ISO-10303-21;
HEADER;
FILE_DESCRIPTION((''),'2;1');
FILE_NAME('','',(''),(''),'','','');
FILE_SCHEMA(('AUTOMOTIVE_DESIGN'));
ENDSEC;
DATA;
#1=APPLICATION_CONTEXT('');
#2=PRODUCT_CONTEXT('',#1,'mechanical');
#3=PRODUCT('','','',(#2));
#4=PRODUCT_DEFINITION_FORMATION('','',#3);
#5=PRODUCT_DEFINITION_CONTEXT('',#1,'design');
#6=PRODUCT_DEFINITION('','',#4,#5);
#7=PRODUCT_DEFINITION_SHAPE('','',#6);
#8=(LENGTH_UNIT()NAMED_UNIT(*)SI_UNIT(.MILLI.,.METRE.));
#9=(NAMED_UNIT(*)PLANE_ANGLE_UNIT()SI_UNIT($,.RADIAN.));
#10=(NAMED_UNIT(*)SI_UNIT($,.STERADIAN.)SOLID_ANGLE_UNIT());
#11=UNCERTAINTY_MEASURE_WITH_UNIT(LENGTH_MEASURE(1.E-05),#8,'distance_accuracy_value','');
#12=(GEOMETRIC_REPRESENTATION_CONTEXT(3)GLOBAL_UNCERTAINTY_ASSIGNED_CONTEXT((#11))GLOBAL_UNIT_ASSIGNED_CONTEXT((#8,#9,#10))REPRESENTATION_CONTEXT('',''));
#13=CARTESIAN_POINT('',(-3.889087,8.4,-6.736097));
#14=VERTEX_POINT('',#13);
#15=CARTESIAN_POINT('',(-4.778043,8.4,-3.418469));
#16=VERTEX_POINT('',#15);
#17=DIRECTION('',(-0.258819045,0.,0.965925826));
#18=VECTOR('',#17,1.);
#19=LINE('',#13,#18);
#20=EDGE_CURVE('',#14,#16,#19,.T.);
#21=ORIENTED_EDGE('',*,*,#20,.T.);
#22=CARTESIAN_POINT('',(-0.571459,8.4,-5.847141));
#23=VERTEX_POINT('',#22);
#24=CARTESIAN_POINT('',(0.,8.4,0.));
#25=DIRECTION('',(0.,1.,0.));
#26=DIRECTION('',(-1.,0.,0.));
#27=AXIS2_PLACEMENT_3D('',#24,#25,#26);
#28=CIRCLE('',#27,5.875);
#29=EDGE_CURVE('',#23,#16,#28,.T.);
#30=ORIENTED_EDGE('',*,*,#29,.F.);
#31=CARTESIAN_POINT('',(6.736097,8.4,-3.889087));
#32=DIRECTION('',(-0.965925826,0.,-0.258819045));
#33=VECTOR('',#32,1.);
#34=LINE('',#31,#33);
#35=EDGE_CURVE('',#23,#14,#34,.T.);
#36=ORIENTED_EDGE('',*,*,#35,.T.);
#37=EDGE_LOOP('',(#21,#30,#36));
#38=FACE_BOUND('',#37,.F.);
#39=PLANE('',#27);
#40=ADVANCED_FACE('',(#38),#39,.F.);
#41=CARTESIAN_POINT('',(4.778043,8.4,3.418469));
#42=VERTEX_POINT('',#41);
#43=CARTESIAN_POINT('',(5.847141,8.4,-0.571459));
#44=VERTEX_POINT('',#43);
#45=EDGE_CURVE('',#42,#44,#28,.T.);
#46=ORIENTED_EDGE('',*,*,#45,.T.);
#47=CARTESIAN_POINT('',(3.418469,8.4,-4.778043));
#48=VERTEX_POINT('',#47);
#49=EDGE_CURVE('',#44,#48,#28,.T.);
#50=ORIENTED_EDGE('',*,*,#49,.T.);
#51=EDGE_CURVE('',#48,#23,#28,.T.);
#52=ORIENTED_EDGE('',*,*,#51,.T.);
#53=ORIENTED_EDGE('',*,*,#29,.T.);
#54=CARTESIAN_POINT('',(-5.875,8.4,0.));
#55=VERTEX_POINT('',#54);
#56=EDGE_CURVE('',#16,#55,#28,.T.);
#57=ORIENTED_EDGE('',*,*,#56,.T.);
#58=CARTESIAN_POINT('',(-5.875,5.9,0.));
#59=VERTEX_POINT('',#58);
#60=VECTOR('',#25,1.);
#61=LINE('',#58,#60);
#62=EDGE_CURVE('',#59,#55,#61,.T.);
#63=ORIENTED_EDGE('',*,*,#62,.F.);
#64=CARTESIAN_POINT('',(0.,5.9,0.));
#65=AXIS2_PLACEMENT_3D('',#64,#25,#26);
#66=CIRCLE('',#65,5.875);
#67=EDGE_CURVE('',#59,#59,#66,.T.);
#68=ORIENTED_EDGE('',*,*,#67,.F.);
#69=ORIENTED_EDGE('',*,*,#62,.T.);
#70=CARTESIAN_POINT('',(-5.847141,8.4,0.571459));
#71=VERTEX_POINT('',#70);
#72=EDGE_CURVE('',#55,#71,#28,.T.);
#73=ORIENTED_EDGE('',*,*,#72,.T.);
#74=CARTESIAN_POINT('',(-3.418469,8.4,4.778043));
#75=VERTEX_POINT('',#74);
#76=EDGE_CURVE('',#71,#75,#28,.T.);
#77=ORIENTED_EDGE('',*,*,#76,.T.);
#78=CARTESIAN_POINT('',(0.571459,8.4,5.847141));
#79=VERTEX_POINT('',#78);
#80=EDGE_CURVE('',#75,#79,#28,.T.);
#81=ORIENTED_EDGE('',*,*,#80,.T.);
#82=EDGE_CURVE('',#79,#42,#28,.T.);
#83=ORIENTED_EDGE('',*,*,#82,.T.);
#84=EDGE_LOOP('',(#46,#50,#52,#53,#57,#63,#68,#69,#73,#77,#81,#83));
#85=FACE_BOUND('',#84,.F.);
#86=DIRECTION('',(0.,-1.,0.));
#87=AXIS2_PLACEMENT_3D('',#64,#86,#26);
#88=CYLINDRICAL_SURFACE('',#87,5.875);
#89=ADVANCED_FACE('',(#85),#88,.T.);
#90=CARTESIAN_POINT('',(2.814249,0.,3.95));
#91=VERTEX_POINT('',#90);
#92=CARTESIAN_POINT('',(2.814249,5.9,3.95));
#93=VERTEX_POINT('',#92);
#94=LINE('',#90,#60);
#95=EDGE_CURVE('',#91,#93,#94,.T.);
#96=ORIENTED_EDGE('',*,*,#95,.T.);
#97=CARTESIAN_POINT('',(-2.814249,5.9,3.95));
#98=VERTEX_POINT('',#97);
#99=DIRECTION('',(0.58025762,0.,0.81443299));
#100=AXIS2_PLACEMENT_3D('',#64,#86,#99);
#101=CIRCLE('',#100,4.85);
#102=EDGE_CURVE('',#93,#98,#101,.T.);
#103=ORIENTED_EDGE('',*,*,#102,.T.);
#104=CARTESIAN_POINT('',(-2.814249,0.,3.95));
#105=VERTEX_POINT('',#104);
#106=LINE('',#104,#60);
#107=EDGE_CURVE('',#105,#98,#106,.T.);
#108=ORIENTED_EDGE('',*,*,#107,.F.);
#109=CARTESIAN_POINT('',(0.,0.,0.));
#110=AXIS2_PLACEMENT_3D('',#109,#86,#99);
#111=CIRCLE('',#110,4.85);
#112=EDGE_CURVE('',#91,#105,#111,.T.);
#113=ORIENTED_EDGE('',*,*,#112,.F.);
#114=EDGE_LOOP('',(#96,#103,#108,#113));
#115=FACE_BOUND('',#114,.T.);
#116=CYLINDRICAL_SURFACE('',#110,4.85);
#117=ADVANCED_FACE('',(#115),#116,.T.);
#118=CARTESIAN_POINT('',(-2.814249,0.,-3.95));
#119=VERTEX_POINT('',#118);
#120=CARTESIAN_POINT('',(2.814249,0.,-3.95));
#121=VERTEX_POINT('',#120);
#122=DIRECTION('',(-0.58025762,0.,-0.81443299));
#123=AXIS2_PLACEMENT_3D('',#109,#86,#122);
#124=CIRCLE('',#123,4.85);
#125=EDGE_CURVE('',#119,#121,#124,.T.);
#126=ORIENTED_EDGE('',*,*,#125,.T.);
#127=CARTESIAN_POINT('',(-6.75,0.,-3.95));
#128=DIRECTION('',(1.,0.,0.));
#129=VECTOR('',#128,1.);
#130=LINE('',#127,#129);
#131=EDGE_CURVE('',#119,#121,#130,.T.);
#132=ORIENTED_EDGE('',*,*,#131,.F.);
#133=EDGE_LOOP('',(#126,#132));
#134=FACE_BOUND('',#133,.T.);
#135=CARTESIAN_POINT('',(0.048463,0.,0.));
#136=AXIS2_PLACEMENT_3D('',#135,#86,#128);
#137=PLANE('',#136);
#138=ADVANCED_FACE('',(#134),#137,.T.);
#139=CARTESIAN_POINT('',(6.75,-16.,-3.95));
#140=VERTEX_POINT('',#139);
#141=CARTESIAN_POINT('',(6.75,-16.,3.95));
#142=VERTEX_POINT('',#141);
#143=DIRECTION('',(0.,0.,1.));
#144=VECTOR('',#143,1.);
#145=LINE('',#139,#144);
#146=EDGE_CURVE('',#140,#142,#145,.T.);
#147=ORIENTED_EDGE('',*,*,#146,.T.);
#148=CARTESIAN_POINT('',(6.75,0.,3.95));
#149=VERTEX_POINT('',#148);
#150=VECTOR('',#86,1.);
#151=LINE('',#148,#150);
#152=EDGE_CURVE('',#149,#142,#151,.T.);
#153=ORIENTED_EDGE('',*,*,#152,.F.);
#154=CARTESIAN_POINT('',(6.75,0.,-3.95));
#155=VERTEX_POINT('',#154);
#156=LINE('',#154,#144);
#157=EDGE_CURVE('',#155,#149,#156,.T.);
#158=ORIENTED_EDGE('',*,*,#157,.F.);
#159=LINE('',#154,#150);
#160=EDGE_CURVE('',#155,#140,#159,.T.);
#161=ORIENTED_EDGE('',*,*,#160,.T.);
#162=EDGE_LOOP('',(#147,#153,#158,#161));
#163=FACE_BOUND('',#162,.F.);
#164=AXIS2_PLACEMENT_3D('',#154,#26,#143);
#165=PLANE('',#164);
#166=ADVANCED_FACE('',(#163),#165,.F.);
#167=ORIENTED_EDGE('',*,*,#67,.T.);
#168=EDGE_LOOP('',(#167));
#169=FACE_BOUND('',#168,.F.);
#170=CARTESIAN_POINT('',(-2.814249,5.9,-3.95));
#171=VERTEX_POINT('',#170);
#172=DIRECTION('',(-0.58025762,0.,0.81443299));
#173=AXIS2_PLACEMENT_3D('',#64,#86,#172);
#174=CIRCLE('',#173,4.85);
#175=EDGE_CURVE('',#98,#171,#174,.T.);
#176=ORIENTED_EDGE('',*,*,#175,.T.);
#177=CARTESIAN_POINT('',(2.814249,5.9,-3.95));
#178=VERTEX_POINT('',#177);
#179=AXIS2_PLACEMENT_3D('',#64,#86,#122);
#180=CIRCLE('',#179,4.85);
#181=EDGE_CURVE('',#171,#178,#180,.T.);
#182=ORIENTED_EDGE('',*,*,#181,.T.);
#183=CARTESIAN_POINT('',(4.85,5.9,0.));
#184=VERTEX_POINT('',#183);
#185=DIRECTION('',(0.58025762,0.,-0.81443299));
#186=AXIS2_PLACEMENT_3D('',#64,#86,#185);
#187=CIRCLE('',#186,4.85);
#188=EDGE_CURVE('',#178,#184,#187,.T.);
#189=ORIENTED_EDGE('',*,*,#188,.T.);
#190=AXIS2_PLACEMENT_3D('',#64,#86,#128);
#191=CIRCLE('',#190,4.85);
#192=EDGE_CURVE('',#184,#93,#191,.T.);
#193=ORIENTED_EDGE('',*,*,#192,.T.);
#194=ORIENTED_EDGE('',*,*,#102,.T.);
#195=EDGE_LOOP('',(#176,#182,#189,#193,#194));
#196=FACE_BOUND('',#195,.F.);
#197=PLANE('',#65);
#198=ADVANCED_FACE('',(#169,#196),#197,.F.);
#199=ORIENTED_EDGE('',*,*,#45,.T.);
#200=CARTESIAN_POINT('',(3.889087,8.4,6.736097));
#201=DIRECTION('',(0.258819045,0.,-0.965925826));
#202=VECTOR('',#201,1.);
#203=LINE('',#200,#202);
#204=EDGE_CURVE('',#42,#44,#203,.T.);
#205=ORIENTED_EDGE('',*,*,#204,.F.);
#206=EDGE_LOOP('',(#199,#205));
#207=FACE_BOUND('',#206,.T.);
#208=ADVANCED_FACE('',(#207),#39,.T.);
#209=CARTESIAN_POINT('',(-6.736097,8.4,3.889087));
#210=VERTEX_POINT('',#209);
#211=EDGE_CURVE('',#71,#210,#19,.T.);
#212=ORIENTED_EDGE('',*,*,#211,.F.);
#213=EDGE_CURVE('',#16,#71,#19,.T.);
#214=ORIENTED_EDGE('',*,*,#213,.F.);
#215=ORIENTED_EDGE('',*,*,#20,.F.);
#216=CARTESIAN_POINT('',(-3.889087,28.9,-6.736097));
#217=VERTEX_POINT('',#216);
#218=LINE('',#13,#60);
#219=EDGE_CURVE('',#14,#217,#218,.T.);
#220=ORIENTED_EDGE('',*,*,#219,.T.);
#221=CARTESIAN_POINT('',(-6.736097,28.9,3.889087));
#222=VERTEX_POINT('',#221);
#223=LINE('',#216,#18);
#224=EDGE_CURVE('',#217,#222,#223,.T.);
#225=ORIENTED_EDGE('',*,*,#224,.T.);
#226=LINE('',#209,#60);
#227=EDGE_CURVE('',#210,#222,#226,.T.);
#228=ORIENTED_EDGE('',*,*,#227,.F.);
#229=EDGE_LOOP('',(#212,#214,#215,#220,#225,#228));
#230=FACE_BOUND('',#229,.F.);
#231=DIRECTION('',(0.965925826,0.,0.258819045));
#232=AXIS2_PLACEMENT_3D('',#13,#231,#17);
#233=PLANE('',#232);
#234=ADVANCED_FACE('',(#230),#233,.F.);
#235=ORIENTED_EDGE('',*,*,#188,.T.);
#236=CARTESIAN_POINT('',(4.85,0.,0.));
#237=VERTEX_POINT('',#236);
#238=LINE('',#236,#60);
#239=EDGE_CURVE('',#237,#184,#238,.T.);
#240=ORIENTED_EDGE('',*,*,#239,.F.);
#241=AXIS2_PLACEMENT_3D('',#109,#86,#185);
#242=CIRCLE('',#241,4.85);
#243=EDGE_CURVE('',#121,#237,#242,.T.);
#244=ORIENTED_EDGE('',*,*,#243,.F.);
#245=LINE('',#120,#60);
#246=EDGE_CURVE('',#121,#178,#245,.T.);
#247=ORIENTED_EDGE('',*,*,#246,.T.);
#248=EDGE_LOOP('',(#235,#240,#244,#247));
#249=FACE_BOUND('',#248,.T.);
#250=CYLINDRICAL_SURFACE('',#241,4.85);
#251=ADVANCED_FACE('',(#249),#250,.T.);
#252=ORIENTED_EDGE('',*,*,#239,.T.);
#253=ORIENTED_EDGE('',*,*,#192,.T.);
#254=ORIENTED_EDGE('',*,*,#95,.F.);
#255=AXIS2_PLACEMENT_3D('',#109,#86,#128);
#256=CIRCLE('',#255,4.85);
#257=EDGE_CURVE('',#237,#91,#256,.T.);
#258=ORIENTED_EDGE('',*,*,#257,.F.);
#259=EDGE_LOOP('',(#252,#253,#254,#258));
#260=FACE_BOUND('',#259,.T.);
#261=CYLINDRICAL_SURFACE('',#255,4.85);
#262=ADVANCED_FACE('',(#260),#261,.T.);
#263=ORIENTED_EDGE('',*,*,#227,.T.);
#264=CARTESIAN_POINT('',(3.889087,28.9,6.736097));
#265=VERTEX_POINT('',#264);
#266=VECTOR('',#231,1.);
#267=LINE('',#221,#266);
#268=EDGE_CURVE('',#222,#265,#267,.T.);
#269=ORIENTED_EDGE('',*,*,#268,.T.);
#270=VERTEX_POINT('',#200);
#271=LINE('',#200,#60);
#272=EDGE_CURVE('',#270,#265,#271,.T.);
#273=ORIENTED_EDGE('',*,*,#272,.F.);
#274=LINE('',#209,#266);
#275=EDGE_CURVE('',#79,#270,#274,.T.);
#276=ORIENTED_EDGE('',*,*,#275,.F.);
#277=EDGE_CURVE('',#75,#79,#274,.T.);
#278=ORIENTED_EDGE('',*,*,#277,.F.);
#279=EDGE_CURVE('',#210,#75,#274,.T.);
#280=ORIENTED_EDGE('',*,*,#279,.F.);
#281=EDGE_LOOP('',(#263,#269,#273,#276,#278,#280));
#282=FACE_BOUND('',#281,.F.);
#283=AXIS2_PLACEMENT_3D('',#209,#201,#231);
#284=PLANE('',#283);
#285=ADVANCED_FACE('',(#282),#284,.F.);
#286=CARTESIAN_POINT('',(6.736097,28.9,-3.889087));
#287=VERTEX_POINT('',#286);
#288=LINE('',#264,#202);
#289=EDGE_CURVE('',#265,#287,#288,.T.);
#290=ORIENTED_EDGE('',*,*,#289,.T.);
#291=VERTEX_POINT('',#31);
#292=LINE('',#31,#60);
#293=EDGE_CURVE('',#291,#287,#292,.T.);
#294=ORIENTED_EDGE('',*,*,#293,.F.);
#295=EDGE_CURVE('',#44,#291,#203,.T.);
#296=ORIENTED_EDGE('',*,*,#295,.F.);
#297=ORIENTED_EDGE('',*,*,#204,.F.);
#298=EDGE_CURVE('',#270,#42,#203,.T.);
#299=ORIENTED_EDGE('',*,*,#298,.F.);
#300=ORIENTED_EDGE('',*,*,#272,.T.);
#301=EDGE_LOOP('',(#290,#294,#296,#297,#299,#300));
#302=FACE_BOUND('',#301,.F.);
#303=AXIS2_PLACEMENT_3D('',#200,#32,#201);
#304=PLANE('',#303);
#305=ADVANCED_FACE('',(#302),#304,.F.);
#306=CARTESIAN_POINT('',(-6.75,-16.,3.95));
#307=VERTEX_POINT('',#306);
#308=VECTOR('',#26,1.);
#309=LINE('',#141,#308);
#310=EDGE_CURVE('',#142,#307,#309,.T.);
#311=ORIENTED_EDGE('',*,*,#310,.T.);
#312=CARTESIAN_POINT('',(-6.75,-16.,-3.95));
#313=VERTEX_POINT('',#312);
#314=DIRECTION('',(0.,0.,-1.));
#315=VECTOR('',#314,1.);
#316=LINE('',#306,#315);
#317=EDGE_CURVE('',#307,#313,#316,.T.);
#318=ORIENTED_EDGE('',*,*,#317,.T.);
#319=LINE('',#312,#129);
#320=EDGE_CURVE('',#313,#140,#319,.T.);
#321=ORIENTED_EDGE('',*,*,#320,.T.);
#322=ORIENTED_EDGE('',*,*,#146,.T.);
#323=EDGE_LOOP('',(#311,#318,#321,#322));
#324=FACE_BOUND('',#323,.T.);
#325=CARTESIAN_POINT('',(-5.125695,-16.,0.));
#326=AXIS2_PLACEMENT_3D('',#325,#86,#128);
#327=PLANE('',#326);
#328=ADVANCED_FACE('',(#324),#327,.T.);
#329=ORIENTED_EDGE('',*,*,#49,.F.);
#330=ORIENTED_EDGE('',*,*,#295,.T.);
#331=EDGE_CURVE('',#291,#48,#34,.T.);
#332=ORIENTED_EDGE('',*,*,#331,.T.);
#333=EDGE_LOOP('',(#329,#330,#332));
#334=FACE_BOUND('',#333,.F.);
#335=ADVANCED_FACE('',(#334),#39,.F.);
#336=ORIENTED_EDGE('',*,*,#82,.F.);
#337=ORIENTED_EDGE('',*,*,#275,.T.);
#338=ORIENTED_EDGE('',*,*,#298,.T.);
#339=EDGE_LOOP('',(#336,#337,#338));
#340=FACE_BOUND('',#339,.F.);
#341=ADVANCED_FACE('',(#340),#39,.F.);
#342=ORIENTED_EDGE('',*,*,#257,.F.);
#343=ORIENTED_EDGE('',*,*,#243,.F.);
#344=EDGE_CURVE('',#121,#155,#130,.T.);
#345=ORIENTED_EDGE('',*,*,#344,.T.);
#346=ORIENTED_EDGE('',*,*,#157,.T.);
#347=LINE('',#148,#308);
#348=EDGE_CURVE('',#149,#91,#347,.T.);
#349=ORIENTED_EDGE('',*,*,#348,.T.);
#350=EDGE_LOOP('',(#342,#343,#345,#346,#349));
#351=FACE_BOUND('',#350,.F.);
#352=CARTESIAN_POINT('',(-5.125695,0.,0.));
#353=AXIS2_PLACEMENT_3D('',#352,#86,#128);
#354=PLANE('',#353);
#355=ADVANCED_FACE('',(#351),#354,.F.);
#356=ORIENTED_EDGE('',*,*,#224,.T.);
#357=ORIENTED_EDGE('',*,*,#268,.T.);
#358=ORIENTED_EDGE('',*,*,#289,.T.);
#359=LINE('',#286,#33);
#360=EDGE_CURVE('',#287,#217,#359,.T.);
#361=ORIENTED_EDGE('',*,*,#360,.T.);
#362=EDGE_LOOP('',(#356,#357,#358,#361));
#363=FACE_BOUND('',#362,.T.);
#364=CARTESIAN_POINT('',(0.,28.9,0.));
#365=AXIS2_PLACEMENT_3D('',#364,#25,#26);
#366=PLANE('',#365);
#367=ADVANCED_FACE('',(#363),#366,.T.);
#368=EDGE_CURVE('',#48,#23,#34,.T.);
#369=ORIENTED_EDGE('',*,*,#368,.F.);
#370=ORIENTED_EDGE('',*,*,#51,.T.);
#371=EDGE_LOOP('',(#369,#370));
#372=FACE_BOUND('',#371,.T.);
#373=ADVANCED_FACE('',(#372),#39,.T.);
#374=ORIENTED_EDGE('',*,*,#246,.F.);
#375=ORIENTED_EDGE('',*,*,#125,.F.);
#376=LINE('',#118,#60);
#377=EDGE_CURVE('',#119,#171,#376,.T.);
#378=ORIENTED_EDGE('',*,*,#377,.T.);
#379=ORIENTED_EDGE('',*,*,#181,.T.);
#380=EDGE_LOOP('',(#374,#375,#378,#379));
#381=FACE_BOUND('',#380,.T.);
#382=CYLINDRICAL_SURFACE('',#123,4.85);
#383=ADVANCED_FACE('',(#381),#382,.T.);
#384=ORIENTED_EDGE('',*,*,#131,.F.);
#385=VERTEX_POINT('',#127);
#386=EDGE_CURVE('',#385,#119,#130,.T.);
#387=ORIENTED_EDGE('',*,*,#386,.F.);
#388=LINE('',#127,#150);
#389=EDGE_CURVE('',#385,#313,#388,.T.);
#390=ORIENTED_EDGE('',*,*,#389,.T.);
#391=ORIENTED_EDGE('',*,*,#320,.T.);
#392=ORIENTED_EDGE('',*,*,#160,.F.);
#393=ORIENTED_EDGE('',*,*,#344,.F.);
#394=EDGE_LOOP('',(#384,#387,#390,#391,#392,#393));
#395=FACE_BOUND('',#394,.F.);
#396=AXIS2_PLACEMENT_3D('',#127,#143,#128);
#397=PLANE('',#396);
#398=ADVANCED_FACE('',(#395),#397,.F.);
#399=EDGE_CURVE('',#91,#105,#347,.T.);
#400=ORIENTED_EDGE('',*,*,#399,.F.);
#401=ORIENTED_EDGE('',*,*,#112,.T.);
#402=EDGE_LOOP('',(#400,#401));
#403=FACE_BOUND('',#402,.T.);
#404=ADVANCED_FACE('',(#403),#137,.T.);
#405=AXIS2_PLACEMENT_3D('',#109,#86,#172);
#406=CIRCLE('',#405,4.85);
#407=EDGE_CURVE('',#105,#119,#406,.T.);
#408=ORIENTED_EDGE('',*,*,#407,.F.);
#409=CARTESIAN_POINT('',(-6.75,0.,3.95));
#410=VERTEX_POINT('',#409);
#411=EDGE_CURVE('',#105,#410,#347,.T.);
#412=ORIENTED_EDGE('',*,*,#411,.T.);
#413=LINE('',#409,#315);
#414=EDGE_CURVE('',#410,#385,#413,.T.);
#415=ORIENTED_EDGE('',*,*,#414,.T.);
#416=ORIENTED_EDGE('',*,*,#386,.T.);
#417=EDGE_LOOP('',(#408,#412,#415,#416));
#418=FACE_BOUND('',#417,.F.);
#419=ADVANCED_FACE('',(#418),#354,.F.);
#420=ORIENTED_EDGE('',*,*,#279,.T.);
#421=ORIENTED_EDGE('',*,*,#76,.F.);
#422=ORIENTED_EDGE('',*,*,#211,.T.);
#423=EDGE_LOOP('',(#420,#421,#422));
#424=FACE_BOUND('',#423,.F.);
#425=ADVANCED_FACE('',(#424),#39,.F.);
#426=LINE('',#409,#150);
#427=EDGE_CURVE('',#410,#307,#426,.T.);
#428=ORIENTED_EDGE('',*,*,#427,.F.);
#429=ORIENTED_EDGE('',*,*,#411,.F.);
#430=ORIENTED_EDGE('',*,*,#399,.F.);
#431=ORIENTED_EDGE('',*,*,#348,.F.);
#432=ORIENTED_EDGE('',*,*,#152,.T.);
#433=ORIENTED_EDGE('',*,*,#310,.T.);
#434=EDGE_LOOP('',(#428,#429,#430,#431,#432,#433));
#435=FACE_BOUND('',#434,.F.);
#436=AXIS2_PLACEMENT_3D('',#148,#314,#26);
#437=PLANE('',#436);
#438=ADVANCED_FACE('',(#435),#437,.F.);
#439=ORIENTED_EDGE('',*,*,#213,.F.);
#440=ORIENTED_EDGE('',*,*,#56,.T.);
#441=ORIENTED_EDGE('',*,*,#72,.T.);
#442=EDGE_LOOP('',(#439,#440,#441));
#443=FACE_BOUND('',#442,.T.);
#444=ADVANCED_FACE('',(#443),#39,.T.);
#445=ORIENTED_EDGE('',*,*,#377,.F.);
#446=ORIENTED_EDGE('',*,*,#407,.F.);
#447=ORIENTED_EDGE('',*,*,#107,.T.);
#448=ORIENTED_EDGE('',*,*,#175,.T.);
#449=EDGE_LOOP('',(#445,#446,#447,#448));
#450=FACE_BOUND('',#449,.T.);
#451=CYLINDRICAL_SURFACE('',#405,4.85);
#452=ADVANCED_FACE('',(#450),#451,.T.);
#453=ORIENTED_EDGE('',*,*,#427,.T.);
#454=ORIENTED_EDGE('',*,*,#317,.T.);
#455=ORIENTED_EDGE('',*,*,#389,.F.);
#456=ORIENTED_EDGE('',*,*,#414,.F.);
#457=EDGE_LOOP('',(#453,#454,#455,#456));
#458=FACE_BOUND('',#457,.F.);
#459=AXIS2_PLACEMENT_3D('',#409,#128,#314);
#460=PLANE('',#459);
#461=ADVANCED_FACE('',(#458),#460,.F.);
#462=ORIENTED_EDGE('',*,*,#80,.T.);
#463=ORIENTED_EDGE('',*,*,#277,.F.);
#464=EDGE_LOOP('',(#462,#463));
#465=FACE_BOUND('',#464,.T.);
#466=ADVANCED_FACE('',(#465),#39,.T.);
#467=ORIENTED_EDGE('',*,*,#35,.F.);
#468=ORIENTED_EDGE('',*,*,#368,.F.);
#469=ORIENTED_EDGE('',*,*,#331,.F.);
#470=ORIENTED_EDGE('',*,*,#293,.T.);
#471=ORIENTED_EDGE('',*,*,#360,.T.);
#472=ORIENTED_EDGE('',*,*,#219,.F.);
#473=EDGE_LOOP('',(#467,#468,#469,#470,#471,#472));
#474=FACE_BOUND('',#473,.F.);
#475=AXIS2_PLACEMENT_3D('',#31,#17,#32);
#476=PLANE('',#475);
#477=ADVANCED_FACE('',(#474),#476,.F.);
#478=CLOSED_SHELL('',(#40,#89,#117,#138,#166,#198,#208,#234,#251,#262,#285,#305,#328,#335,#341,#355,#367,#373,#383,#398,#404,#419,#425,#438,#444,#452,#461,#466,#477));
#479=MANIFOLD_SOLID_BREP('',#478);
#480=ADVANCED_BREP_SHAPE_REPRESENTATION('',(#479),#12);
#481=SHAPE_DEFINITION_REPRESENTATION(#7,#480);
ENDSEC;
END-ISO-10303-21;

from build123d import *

# Parameters (mm, degrees)
F1_DEPTH = 5.9
F2_DEPTH = 16
F3_R     = 5.875
F3_R_2   = 4.85
F4_DEPTH = 2.5
F6_DEPTH = 20.5


with BuildPart() as f1:
    # F0 (on Front) → F1 (new body)
    with BuildSketch(Plane.XZ):
        with BuildLine():
            Line((-2.8142494559, -3.95), (2.8142494559, -3.95))
            ThreePointArc((2.8142494559, -3.95), (4.311125715, -2.2218674734), (4.85, 0))
            ThreePointArc((4.85, 0), (4.311125715, 2.2218674734), (2.8142494559, 3.95))
            Line((2.8142494559, 3.95), (-2.8142494559, 3.95))
            ThreePointArc((-2.8142494559, 3.95), (-4.85, 0), (-2.8142494559, -3.95))
        make_face()
        with BuildLine():
            ThreePointArc((-2.8142494559, -3.95), (0, -4.85), (2.8142494559, -3.95))
            Line((2.8142494559, -3.95), (-2.8142494559, -3.95))
        make_face()
        with BuildLine():
            Line((-2.8142494559, 3.95), (2.8142494559, 3.95))
            ThreePointArc((2.8142494559, 3.95), (0, 4.85), (-2.8142494559, 3.95))
        make_face()
    extrude(amount=-F1_DEPTH)

    # F0 (on Front) → F2 (join)
    with BuildSketch(Plane.XZ):
        with BuildLine():
            Line((-6.75, -3.95), (-2.8142494559, -3.95))
            ThreePointArc((-2.8142494559, -3.95), (-4.85, 0), (-2.8142494559, 3.95))
            Line((-2.8142494559, 3.95), (-6.75, 3.95))
            Line((-6.75, 3.95), (-6.75, -3.95))
        make_face()
        with BuildLine():
            Line((-2.8142494559, -3.95), (2.8142494559, -3.95))
            ThreePointArc((2.8142494559, -3.95), (4.311125715, -2.2218674734), (4.85, 0))
            ThreePointArc((4.85, 0), (4.311125715, 2.2218674734), (2.8142494559, 3.95))
            Line((2.8142494559, 3.95), (-2.8142494559, 3.95))
            ThreePointArc((-2.8142494559, 3.95), (-4.85, 0), (-2.8142494559, -3.95))
        make_face()
        with BuildLine():
            Line((2.8142494559, -3.95), (6.75, -3.95))
            Line((6.75, -3.95), (6.75, 3.95))
            Line((6.75, 3.95), (2.8142494559, 3.95))
            ThreePointArc((2.8142494559, 3.95), (4.311125715, 2.2218674734), (4.85, 0))
            ThreePointArc((4.85, 0), (4.311125715, -2.2218674734), (2.8142494559, -3.95))
        make_face()
    extrude(amount=F2_DEPTH)

    # F3 (on face) → F4 (join)
    with BuildSketch(Plane(origin=(0, 5.9, 0), x_dir=(-1, 0, 0), z_dir=(0, 1, 0))):
        Circle(F3_R)
        Circle(F3_R_2, mode=Mode.SUBTRACT)
        Circle(F3_R_2)
    extrude(amount=F4_DEPTH)

    # F5 (on face) → F6 (join)
    with BuildSketch(Plane(origin=(0, 8.4, 0), x_dir=(-1, 0, 0), z_dir=(0, 1, 0))):
        Polygon((-6.7360967927, -3.8890872965), (3.8890872965, -6.7360967927), (6.7360967927, 3.8890872965), (-3.8890872965, 6.7360967927), align=None)
    extrude(amount=F6_DEPTH)


solid = f1.part
